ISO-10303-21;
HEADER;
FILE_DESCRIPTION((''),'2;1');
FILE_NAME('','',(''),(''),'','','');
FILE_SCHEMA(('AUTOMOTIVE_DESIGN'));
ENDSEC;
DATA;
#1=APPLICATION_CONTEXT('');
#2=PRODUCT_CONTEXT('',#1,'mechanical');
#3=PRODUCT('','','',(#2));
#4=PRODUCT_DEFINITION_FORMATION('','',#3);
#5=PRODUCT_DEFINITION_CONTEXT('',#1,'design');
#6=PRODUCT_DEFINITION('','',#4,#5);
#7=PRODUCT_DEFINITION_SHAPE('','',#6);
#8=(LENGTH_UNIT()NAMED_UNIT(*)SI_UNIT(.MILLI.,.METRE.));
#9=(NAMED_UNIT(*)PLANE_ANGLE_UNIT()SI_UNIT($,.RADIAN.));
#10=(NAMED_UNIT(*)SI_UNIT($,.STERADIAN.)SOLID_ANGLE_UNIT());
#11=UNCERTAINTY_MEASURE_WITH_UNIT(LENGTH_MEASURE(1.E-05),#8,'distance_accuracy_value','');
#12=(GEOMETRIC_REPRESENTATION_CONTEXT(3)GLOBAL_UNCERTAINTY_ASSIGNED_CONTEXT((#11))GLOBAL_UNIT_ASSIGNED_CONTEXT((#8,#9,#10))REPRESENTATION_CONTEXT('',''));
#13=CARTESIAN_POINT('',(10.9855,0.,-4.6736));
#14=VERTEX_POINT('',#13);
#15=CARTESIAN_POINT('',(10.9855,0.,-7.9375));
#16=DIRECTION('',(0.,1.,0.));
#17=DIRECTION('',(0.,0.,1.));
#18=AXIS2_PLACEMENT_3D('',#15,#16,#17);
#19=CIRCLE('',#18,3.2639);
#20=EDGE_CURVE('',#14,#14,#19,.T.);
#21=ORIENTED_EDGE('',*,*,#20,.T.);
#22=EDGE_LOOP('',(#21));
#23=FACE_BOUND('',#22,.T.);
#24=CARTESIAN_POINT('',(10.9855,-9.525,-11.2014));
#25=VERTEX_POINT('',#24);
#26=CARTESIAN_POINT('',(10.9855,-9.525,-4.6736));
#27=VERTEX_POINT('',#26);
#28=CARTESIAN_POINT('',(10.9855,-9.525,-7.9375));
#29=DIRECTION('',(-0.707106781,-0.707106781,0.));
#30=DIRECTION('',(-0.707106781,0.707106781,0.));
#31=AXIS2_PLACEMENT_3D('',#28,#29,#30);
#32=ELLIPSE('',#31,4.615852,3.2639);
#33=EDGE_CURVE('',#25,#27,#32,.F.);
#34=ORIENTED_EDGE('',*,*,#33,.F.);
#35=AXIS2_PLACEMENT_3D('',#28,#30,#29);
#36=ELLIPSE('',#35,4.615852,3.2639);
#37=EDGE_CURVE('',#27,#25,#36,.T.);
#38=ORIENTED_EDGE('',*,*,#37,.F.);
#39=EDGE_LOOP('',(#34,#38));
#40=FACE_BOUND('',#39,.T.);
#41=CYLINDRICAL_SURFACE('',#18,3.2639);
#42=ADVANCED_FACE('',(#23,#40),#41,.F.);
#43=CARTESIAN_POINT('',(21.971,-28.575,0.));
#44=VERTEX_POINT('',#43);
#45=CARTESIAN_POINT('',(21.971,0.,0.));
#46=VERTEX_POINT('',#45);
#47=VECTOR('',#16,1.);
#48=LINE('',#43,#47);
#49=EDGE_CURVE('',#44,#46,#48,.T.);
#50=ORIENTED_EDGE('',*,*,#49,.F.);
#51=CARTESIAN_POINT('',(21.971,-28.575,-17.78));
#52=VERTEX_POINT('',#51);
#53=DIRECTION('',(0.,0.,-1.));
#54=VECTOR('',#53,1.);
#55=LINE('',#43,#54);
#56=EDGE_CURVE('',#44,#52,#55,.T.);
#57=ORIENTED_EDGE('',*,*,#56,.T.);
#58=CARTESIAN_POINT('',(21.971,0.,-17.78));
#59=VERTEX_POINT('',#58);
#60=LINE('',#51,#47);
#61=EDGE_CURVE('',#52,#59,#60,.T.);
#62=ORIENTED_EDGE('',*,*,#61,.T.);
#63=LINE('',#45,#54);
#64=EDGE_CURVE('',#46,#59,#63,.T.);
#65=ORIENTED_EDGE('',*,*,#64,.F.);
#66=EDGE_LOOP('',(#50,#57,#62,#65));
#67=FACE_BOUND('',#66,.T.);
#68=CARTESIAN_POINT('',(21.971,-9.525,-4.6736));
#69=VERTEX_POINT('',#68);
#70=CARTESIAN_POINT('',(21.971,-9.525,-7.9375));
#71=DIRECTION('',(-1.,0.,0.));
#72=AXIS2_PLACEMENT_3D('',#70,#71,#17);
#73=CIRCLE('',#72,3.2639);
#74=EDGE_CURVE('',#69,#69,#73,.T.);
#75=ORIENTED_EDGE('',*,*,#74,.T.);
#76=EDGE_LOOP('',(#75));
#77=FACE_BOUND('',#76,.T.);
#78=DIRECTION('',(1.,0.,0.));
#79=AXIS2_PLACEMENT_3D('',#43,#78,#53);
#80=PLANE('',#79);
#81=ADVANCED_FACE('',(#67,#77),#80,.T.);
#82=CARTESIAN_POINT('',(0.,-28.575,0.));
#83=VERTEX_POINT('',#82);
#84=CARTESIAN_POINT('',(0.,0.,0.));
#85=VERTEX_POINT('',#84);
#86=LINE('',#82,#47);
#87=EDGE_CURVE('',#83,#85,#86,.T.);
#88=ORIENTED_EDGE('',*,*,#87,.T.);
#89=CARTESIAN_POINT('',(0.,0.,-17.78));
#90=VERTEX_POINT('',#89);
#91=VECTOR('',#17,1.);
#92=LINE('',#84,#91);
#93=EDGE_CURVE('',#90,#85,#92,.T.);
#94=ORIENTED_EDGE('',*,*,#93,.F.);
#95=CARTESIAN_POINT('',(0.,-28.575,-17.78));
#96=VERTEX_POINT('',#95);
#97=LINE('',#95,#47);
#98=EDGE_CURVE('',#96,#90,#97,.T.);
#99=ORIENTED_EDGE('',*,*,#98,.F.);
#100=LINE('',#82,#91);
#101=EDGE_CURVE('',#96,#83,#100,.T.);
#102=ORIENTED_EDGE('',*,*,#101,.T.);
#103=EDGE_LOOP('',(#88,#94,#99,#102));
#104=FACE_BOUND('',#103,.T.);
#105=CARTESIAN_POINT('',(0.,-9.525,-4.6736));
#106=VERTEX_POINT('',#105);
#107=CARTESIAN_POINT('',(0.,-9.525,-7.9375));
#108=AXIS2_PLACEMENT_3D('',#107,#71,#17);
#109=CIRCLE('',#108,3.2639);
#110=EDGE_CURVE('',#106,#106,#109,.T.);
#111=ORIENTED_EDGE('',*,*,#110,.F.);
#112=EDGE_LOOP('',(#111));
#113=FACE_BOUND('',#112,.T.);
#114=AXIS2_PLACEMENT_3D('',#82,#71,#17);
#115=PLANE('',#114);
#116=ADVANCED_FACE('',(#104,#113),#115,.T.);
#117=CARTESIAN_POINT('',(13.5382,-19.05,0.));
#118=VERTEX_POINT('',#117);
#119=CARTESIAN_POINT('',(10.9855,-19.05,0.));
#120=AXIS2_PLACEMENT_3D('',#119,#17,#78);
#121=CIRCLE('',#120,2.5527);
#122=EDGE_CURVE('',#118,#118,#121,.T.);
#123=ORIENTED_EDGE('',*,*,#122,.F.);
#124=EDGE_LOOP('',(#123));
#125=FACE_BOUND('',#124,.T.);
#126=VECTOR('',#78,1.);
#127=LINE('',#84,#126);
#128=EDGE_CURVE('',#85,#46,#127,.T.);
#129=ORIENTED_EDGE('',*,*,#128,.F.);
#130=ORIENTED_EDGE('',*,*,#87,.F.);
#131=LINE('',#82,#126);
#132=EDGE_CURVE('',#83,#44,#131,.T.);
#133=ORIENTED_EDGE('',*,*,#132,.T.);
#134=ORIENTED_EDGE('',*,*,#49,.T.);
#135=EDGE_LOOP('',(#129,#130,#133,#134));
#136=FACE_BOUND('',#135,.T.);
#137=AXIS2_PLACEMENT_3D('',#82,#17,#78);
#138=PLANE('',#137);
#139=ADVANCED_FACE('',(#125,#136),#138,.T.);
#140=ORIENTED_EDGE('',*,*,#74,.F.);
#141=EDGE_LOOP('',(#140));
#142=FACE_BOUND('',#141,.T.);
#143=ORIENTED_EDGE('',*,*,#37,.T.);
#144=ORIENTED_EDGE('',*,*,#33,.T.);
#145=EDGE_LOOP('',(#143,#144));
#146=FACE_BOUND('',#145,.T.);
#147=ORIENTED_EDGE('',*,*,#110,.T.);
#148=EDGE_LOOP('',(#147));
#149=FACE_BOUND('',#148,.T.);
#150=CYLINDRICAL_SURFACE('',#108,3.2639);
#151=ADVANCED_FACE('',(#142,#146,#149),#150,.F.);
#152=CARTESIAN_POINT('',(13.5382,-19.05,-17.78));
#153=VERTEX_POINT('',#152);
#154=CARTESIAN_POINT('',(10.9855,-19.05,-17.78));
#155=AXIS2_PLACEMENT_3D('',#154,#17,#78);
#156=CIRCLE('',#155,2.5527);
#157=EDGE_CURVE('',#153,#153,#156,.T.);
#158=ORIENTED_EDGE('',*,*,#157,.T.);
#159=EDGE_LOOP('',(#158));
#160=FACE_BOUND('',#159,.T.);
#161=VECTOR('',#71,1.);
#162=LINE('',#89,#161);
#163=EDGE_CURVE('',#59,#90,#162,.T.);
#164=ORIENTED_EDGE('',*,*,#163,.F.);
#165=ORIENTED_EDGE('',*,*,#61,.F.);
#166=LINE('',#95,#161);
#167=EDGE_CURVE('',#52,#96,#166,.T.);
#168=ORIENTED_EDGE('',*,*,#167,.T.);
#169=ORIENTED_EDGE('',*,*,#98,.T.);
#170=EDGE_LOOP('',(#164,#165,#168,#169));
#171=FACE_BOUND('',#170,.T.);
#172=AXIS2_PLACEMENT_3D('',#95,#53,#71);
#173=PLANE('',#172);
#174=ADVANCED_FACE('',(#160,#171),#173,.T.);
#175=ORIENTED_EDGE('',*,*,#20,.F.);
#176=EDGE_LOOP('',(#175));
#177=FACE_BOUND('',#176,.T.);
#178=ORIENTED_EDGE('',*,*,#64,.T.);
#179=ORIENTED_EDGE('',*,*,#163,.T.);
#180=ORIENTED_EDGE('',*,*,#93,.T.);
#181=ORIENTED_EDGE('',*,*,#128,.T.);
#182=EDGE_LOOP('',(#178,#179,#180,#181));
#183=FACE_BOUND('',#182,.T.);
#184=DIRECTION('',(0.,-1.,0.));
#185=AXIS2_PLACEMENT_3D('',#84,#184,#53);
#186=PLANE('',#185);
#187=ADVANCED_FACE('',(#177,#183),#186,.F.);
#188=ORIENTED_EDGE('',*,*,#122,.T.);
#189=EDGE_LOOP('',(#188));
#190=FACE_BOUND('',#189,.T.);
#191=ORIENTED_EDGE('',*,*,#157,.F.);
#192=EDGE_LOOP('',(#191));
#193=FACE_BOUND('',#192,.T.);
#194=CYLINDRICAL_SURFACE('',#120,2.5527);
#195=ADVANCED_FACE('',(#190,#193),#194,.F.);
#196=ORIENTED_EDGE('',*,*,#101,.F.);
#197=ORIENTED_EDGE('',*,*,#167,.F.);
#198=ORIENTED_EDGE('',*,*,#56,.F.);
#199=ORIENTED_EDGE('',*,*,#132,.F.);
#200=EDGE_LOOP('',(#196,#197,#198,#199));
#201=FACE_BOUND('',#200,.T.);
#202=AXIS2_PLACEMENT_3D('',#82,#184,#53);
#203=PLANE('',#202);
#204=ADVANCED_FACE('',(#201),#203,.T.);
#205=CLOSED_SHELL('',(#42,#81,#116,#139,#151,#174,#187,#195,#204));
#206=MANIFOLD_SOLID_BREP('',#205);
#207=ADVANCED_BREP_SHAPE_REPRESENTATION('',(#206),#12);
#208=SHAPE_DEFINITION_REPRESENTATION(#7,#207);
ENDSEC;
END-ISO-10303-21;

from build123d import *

# Parameters (mm, degrees)
SKETCH1_W                        = 21.971
SKETCH1_H                        = 17.78
BOSS_EXTRUDE1_DEPTH              = 28.575
F_10_CLEARANCE_HOLE1_D           = 5.1054
F_0_257_DIAMETER_HOLE1_D         = 6.5278
F_0_257_DIAMETER_HOLE2_OUTLINE_W = 3.2639
F_0_257_DIAMETER_HOLE2_OUTLINE_H = 9.525


# Read off the part's stored shape, not the designer's step: F (0.257) Diameter Hole2
with BuildPart() as part:
    # Sketch1 → Boss-Extrude1 (new body)
    with BuildSketch(Plane(origin=(0, 0, 0), x_dir=(1, 0, 0), z_dir=(0, 1, 0))):
        with Locations((10.9855, 8.89)):
            Rectangle(SKETCH1_W, SKETCH1_H)
    extrude(amount=-BOSS_EXTRUDE1_DEPTH)

    # #10 Clearance Hole1 (through all)
    with Locations(Plane.XY):
        with Locations((10.9855, -19.05)):
            Hole(F_10_CLEARANCE_HOLE1_D / 2)

    # F (0.257) Diameter Hole1 (through all)
    with Locations(Plane.ZY):
        with Locations((-7.9375, -9.525)):
            Hole(F_0_257_DIAMETER_HOLE1_D / 2)

    # F (0.257) Diameter Hole2 outline → F (0.257) Diameter Hole2 (revolve, cut)
    with BuildSketch(Plane(origin=(10.9855, 0, -7.9375), x_dir=(1, 0, 0), z_dir=(0, 0, 1))):
        with Locations((1.63195, -4.7625)):
            Rectangle(F_0_257_DIAMETER_HOLE2_OUTLINE_W, F_0_257_DIAMETER_HOLE2_OUTLINE_H)
    revolve(axis=Axis((10.9855, 0, -7.9375), (0, 1, 0)), mode=Mode.SUBTRACT)


solid = part.part
